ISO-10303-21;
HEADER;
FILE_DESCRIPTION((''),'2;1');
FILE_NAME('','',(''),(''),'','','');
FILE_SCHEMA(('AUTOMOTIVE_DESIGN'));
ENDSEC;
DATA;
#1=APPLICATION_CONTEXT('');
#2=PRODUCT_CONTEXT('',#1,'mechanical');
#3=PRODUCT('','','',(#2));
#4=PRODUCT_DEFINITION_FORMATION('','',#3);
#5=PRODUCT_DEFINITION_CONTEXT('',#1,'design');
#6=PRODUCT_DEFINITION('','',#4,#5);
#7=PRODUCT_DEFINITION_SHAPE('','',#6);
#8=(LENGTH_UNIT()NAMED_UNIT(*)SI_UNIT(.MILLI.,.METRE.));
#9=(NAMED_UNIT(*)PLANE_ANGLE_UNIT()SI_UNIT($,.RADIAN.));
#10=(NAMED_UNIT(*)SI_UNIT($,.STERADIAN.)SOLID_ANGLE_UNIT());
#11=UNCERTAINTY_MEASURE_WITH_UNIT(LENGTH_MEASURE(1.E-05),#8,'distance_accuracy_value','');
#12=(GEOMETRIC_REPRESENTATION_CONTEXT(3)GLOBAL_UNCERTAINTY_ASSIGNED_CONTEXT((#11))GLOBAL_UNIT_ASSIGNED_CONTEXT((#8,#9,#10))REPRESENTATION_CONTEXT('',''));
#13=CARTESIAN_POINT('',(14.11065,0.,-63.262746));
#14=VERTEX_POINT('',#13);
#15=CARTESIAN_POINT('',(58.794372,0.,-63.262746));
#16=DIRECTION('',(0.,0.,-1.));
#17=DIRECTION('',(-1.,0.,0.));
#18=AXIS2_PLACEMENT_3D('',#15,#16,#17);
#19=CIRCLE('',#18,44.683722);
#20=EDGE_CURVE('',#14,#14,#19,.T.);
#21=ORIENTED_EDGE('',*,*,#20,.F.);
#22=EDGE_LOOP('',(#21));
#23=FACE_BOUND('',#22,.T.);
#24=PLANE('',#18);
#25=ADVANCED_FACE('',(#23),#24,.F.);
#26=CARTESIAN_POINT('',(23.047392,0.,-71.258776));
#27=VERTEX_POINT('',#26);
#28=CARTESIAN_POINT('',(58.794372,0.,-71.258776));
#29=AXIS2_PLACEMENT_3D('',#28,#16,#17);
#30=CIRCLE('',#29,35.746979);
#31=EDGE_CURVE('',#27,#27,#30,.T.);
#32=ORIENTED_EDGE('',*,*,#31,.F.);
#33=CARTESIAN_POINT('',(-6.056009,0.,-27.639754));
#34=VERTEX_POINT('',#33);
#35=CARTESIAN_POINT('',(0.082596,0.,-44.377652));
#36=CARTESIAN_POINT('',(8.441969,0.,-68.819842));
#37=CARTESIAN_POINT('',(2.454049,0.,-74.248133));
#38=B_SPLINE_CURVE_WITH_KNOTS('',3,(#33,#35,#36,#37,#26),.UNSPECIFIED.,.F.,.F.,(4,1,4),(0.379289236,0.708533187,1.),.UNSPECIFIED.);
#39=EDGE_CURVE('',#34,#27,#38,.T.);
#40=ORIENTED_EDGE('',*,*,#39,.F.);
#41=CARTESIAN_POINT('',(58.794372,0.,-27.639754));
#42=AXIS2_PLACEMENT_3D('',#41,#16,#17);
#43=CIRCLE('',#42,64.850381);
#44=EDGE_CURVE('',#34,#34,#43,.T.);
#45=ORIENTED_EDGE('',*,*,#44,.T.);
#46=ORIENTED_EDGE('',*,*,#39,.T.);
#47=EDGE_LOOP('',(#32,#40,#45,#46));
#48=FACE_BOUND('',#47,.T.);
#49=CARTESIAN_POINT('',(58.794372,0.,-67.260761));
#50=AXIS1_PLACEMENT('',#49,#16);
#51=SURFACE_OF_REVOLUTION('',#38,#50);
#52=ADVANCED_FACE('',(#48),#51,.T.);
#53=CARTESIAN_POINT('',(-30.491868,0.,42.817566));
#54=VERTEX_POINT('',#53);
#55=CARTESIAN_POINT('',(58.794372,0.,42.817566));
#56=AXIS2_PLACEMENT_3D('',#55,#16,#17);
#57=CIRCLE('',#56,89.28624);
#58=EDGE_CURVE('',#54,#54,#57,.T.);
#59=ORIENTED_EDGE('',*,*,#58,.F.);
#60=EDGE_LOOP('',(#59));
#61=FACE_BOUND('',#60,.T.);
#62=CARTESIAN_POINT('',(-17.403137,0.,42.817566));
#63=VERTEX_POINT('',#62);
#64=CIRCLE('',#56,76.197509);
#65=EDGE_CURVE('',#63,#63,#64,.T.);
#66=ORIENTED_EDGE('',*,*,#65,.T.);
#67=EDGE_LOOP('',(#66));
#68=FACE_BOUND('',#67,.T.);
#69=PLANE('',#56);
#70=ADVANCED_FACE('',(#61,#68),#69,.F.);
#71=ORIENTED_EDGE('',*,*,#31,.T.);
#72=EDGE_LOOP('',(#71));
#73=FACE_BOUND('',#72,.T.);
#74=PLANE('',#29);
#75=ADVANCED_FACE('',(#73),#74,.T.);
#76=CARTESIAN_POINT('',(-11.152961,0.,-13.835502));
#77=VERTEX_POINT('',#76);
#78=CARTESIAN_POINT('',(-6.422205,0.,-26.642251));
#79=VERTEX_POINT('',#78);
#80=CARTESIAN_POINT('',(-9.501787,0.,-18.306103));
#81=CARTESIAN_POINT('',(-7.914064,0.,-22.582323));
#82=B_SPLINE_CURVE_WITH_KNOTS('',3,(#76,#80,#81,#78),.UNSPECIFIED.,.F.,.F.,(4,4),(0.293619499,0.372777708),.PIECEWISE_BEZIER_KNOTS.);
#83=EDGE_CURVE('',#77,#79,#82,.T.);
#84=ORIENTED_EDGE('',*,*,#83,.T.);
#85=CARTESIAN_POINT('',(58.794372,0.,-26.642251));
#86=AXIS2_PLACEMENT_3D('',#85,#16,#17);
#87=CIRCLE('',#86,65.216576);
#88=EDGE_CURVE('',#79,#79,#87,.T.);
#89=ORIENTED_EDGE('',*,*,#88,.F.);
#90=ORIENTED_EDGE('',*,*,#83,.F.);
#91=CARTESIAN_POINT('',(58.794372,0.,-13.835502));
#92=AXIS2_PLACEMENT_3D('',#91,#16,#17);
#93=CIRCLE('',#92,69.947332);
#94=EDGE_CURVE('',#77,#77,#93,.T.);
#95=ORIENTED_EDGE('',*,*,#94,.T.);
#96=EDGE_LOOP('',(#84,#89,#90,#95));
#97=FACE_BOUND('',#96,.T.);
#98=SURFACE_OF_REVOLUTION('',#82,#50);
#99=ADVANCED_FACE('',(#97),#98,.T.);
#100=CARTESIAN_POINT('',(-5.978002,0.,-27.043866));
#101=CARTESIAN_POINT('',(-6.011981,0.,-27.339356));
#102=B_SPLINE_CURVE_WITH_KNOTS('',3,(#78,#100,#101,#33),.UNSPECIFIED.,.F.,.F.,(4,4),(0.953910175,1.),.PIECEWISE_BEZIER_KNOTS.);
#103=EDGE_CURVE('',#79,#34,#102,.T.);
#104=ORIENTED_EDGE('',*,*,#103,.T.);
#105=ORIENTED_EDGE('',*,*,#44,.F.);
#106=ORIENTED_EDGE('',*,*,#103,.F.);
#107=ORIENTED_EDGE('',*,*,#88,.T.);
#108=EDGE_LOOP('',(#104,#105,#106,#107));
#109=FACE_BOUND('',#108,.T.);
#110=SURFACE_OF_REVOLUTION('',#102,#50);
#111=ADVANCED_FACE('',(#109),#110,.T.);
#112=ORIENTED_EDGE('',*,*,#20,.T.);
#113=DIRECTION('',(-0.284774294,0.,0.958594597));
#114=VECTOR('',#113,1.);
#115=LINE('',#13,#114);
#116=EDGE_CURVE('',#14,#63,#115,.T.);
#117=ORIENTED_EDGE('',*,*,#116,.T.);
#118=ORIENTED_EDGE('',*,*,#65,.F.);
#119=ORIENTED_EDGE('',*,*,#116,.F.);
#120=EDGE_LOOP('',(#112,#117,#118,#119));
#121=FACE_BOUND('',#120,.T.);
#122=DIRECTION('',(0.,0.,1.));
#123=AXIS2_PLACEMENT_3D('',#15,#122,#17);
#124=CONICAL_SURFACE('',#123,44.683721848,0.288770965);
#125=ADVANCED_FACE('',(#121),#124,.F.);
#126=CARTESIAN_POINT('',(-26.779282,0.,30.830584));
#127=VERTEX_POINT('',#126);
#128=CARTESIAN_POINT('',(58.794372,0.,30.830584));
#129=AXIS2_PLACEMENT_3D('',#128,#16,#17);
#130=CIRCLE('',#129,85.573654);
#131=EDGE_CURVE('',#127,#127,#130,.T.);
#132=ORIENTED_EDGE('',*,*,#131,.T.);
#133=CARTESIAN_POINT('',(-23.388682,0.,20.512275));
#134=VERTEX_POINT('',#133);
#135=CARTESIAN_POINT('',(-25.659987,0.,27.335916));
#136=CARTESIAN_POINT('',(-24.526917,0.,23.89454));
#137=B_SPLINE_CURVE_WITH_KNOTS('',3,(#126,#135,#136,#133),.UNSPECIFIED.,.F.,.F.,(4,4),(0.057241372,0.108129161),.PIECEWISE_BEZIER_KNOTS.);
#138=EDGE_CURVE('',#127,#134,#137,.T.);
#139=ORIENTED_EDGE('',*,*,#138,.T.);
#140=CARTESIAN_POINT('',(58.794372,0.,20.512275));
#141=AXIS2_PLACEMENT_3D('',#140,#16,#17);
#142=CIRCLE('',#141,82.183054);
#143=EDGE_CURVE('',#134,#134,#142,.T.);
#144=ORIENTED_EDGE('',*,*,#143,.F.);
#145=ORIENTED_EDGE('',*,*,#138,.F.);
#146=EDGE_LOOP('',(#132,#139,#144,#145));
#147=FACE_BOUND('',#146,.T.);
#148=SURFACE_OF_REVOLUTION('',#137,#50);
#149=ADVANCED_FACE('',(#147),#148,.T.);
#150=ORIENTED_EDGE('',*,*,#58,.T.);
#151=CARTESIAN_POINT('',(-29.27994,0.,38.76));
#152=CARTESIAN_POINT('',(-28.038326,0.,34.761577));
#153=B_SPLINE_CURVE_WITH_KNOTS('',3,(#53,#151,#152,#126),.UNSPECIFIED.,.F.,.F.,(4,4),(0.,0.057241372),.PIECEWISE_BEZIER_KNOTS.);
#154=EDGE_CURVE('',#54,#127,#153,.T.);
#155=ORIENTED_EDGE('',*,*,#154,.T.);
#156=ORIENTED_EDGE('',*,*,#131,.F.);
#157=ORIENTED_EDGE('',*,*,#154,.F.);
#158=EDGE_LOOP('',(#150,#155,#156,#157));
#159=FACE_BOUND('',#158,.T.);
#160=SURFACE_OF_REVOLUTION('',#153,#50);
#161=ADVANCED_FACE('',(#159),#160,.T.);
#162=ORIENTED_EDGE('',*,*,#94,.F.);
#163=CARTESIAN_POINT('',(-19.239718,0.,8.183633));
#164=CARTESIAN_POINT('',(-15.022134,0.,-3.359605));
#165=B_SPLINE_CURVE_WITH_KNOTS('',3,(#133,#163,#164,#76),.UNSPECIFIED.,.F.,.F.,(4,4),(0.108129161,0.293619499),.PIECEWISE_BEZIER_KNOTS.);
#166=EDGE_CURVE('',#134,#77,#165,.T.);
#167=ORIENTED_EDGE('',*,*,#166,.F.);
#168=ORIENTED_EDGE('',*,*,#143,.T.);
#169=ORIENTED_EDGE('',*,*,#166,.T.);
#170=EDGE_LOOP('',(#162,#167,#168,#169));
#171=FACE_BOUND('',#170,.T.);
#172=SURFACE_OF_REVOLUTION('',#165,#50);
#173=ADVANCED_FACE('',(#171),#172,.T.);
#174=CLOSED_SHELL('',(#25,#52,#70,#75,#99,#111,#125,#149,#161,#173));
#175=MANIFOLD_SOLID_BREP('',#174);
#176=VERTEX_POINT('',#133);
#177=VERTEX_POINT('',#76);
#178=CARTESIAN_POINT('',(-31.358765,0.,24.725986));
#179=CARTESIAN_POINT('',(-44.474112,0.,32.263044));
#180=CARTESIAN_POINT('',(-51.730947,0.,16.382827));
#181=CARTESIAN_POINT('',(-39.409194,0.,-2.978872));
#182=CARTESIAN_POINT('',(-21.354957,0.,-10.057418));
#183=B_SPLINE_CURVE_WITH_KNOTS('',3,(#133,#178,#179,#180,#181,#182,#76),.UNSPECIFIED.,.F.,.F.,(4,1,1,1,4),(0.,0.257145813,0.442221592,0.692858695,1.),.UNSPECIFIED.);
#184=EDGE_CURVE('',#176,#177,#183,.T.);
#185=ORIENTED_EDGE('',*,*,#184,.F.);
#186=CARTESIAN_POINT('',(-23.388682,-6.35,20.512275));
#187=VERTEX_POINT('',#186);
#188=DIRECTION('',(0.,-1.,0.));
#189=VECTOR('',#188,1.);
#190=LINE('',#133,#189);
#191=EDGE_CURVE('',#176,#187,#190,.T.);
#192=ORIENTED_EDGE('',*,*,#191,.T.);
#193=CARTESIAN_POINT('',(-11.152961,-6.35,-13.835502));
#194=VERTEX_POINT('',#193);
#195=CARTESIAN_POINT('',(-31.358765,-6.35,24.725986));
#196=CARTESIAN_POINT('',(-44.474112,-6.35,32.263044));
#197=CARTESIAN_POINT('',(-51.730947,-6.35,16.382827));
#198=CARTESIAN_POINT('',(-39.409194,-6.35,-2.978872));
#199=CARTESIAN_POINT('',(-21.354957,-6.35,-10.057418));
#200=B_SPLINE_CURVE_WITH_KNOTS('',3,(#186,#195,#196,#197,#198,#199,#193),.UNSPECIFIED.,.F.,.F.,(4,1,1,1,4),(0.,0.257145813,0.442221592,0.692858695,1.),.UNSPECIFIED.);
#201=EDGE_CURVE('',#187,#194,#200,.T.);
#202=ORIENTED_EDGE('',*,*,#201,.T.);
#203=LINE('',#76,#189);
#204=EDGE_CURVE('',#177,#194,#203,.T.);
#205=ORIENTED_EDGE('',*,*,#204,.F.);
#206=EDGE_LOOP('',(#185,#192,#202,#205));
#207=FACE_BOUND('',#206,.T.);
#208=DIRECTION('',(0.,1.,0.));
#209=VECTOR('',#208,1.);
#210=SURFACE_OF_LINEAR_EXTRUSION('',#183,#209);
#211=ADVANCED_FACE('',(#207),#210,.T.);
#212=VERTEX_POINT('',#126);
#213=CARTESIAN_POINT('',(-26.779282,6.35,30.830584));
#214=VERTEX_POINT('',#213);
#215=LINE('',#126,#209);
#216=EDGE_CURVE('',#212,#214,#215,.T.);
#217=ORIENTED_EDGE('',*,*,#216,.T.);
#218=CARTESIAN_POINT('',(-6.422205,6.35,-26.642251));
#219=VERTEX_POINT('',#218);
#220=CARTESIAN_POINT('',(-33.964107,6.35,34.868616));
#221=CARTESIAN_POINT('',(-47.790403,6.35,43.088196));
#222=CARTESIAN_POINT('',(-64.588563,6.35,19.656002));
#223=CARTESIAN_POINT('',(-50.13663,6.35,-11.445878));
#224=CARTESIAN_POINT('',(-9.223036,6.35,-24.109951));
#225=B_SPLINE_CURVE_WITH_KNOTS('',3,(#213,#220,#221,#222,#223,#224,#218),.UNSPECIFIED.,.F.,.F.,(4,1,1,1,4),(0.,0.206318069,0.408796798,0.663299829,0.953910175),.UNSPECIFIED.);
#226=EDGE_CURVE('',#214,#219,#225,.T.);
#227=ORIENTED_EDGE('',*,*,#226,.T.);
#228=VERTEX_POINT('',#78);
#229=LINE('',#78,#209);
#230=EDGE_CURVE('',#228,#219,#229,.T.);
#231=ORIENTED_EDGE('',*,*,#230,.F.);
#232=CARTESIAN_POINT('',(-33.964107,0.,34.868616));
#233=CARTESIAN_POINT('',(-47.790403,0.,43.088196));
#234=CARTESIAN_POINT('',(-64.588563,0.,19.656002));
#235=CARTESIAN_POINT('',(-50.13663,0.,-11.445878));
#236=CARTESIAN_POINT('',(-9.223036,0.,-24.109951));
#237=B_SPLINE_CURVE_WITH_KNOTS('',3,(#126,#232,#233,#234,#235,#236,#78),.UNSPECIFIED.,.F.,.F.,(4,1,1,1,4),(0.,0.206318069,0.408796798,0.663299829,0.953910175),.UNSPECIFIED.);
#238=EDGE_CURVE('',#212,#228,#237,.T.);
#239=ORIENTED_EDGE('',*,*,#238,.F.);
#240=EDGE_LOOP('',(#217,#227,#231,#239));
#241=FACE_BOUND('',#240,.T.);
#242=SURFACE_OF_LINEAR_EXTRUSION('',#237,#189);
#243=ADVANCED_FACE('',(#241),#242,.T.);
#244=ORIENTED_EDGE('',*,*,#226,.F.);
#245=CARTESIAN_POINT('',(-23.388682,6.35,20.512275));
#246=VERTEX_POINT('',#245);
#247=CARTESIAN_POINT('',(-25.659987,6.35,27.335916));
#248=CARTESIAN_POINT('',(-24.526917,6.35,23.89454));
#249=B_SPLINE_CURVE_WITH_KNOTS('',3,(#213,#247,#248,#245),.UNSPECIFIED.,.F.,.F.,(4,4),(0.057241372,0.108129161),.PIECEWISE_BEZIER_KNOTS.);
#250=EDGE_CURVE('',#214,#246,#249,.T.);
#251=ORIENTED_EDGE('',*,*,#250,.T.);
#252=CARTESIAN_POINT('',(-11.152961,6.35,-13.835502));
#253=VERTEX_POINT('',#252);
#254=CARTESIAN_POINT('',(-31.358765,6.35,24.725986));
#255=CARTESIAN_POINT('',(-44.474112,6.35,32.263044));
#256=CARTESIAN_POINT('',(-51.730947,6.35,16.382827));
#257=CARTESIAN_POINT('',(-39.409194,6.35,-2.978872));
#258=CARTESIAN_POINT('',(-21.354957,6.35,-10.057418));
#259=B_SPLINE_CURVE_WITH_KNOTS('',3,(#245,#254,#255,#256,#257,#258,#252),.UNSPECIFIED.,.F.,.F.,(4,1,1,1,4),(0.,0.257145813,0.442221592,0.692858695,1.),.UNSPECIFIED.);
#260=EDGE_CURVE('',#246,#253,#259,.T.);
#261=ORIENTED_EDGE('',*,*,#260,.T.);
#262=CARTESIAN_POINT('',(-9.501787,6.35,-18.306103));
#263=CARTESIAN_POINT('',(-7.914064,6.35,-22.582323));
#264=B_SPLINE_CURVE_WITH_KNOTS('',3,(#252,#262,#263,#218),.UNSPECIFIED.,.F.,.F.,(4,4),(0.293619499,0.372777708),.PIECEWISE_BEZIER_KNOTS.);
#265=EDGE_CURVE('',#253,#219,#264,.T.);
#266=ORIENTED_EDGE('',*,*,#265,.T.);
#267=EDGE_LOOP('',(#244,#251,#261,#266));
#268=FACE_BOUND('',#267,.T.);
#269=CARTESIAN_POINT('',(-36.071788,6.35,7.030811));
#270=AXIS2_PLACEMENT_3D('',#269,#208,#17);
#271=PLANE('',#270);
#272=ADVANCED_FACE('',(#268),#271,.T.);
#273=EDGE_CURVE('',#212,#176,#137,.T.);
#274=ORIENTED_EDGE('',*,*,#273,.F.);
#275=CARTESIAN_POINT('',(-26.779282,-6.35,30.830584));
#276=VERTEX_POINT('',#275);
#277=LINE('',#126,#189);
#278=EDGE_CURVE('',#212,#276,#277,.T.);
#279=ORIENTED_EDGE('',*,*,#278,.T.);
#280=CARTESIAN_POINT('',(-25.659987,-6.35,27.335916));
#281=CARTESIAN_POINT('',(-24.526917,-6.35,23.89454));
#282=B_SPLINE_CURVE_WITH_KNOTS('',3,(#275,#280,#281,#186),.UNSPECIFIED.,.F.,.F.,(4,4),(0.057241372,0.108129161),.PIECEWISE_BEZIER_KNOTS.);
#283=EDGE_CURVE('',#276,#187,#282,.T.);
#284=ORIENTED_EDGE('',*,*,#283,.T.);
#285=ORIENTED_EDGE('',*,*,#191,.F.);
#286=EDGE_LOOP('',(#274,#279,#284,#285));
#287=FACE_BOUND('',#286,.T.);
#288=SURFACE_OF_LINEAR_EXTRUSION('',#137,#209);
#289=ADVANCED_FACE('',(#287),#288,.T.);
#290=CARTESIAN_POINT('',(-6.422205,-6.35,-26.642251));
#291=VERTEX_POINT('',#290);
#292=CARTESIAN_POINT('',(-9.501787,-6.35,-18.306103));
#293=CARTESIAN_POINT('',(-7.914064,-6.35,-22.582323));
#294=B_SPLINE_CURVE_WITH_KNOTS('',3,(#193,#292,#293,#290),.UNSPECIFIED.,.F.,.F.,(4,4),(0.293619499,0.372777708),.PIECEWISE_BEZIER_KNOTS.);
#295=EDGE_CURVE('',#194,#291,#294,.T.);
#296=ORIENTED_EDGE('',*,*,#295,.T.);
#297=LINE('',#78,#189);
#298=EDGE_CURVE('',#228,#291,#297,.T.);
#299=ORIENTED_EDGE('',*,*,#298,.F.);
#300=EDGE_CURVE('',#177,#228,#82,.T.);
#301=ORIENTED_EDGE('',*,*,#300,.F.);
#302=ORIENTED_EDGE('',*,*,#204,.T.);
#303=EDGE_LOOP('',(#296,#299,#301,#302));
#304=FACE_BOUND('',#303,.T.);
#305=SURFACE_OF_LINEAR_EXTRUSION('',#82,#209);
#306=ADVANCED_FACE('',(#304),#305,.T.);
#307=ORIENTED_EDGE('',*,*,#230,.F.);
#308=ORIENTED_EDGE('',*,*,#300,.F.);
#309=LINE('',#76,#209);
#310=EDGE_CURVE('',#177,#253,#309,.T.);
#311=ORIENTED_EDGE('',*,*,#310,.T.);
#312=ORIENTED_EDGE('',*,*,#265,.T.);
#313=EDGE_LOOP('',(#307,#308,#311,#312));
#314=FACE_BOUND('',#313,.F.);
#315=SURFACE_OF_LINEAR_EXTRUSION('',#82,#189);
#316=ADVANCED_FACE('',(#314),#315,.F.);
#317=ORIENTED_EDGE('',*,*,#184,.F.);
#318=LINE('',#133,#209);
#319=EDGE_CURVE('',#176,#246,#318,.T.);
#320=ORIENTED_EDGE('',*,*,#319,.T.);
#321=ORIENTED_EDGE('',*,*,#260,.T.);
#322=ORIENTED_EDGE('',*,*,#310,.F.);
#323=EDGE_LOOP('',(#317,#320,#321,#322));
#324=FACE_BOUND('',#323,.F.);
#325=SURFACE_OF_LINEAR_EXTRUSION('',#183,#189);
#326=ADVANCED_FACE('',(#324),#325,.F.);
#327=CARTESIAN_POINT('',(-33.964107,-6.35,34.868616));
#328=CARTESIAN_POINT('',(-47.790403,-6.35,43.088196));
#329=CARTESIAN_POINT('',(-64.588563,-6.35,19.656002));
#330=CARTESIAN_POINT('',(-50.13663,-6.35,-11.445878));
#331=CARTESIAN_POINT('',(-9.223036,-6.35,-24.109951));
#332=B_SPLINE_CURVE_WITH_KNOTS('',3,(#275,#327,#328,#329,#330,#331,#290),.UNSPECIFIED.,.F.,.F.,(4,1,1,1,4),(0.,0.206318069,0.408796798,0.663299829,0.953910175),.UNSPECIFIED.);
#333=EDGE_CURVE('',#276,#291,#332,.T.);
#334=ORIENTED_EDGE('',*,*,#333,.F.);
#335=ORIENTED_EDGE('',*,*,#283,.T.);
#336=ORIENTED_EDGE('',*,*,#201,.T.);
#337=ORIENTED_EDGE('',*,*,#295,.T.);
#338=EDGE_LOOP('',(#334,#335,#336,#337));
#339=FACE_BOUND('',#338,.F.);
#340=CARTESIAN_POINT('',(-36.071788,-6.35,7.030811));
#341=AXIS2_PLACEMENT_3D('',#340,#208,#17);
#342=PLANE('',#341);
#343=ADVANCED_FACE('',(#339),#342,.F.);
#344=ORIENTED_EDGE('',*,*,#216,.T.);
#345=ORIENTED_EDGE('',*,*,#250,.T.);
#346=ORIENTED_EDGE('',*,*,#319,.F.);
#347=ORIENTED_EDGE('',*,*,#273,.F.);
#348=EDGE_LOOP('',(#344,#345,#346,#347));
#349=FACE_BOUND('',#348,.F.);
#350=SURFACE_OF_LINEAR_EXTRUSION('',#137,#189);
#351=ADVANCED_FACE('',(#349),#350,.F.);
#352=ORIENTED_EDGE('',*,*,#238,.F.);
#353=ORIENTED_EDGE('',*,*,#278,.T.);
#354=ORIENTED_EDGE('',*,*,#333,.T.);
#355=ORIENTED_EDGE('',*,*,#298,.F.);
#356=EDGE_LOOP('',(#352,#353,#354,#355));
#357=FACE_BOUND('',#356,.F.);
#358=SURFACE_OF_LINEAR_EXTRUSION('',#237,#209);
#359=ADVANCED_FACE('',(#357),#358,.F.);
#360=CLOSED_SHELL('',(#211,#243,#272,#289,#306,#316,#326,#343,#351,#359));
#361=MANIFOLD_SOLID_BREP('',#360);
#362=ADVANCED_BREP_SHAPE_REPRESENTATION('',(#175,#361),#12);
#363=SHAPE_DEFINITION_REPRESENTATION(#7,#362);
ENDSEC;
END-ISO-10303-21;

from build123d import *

# Parameters (mm, degrees)
F1_DEPTH = 6.35


with BuildPart() as f1:
    # F0 (on Front) → F1 (new body, symmetric)
    with BuildSketch(Plane.XZ):
        with BuildLine():
            add(Edge.make_bspline(
                [(-26.779282031, 30.8305839929), (-25.6599872306, 27.3359164201), (-24.5269169087, 23.8945397492), (-23.388681933, 20.5122753915)],
                knots=[0.0572413722, 0.0572413722, 0.0572413722, 0.0572413722, 0.1081291612, 0.1081291612, 0.1081291612, 0.1081291612], degree=3))
            add(Edge.make_bspline(
                [(-26.779282031, 30.8305839929), (-33.9641073682, 34.8686155193), (-47.7904028814, 43.0881960424), (-64.5885629334, 19.6560020505), (-50.1366297488, -11.4458780792), (-9.2230358971, -24.1099512444), (-6.4222046506, -26.6422513876)],
                knots=[0, 0, 0, 0, 0.206318069, 0.4087967984, 0.6632998285, 0.9539101751, 0.9539101751, 0.9539101751, 0.9539101751], degree=3))
            add(Edge.make_bspline(
                [(-11.1529605838, -13.8355021779), (-9.5017867072, -18.3061029042), (-7.914064356, -22.5823231964), (-6.4222046506, -26.6422513876)],
                knots=[0.2936194992, 0.2936194992, 0.2936194992, 0.2936194992, 0.3727777079, 0.3727777079, 0.3727777079, 0.3727777079], degree=3))
            add(Edge.make_bspline(
                [(-23.388681933, 20.5122753915), (-31.3587647344, 24.7259859161), (-44.4741122772, 32.263043577), (-51.7309465833, 16.3828269272), (-39.4091940553, -2.9788718203), (-21.3549569349, -10.0574184983), (-11.1529605838, -13.8355021779)],
                knots=[0, 0, 0, 0, 0.2571458127, 0.4422215918, 0.6928586951, 1, 1, 1, 1], degree=3))
        make_face()
    extrude(amount=F1_DEPTH, both=True)

    # F0 (on Front) → F2 (revolve)
    with BuildSketch(Plane.XZ):
        with BuildLine():
            Line((-17.4031369388, 42.8175656639), (-30.4918682477, 42.8175656639))
            add(Edge.make_bspline(
                [(-30.4918682477, 42.8175656639), (-29.2799400842, 38.7599998745), (-28.0383261293, 34.761577491), (-26.779282031, 30.8305839929)],
                knots=[0, 0, 0, 0, 0.0572413722, 0.0572413722, 0.0572413722, 0.0572413722], degree=3))
            add(Edge.make_bspline(
                [(-26.779282031, 30.8305839929), (-25.6599872306, 27.3359164201), (-24.5269169087, 23.8945397492), (-23.388681933, 20.5122753915)],
                knots=[0.0572413722, 0.0572413722, 0.0572413722, 0.0572413722, 0.1081291612, 0.1081291612, 0.1081291612, 0.1081291612], degree=3))
            add(Edge.make_bspline(
                [(-23.388681933, 20.5122753915), (-19.2397182058, 8.1836328569), (-15.0221335422, -3.3596051914), (-11.1529605838, -13.8355021779)],
                knots=[0.1081291612, 0.1081291612, 0.1081291612, 0.1081291612, 0.2936194992, 0.2936194992, 0.2936194992, 0.2936194992], degree=3))
            add(Edge.make_bspline(
                [(-11.1529605838, -13.8355021779), (-9.5017867072, -18.3061029042), (-7.914064356, -22.5823231964), (-6.4222046506, -26.6422513876)],
                knots=[0.2936194992, 0.2936194992, 0.2936194992, 0.2936194992, 0.3727777079, 0.3727777079, 0.3727777079, 0.3727777079], degree=3))
            add(Edge.make_bspline(
                [(-6.4222046506, -26.6422513876), (-5.9780022219, -27.0438656852), (-6.0119811368, -27.339355921), (-6.0560090254, -27.6397535643)],
                knots=[0.9539101751, 0.9539101751, 0.9539101751, 0.9539101751, 1, 1, 1, 1], degree=3))
            add(Edge.make_bspline(
                [(-6.0560090254, -27.6397535643), (0.0825960797, -44.3776523907), (8.441969007, -68.8198420623), (2.4540492736, -74.2481329269), (23.0473924894, -71.2587758899)],
                knots=[0.3792892362, 0.3792892362, 0.3792892362, 0.3792892362, 0.7085331873, 1, 1, 1, 1], degree=3))
            Line((23.0473924894, -71.2587758899), (58.7943717837, -71.2587758899))
            Line((58.7943717837, -71.2587758899), (58.7943717837, -63.262745738))
            Line((58.7943717837, -63.262745738), (14.1106499359, -63.262745738))
            Line((14.1106499359, -63.262745738), (-17.4031369388, 42.8175656639))
        make_face()
    revolve(axis=Axis((58.7943717837, 0, -67.260760814), (0, 0, -1)))


solid = f1.part
